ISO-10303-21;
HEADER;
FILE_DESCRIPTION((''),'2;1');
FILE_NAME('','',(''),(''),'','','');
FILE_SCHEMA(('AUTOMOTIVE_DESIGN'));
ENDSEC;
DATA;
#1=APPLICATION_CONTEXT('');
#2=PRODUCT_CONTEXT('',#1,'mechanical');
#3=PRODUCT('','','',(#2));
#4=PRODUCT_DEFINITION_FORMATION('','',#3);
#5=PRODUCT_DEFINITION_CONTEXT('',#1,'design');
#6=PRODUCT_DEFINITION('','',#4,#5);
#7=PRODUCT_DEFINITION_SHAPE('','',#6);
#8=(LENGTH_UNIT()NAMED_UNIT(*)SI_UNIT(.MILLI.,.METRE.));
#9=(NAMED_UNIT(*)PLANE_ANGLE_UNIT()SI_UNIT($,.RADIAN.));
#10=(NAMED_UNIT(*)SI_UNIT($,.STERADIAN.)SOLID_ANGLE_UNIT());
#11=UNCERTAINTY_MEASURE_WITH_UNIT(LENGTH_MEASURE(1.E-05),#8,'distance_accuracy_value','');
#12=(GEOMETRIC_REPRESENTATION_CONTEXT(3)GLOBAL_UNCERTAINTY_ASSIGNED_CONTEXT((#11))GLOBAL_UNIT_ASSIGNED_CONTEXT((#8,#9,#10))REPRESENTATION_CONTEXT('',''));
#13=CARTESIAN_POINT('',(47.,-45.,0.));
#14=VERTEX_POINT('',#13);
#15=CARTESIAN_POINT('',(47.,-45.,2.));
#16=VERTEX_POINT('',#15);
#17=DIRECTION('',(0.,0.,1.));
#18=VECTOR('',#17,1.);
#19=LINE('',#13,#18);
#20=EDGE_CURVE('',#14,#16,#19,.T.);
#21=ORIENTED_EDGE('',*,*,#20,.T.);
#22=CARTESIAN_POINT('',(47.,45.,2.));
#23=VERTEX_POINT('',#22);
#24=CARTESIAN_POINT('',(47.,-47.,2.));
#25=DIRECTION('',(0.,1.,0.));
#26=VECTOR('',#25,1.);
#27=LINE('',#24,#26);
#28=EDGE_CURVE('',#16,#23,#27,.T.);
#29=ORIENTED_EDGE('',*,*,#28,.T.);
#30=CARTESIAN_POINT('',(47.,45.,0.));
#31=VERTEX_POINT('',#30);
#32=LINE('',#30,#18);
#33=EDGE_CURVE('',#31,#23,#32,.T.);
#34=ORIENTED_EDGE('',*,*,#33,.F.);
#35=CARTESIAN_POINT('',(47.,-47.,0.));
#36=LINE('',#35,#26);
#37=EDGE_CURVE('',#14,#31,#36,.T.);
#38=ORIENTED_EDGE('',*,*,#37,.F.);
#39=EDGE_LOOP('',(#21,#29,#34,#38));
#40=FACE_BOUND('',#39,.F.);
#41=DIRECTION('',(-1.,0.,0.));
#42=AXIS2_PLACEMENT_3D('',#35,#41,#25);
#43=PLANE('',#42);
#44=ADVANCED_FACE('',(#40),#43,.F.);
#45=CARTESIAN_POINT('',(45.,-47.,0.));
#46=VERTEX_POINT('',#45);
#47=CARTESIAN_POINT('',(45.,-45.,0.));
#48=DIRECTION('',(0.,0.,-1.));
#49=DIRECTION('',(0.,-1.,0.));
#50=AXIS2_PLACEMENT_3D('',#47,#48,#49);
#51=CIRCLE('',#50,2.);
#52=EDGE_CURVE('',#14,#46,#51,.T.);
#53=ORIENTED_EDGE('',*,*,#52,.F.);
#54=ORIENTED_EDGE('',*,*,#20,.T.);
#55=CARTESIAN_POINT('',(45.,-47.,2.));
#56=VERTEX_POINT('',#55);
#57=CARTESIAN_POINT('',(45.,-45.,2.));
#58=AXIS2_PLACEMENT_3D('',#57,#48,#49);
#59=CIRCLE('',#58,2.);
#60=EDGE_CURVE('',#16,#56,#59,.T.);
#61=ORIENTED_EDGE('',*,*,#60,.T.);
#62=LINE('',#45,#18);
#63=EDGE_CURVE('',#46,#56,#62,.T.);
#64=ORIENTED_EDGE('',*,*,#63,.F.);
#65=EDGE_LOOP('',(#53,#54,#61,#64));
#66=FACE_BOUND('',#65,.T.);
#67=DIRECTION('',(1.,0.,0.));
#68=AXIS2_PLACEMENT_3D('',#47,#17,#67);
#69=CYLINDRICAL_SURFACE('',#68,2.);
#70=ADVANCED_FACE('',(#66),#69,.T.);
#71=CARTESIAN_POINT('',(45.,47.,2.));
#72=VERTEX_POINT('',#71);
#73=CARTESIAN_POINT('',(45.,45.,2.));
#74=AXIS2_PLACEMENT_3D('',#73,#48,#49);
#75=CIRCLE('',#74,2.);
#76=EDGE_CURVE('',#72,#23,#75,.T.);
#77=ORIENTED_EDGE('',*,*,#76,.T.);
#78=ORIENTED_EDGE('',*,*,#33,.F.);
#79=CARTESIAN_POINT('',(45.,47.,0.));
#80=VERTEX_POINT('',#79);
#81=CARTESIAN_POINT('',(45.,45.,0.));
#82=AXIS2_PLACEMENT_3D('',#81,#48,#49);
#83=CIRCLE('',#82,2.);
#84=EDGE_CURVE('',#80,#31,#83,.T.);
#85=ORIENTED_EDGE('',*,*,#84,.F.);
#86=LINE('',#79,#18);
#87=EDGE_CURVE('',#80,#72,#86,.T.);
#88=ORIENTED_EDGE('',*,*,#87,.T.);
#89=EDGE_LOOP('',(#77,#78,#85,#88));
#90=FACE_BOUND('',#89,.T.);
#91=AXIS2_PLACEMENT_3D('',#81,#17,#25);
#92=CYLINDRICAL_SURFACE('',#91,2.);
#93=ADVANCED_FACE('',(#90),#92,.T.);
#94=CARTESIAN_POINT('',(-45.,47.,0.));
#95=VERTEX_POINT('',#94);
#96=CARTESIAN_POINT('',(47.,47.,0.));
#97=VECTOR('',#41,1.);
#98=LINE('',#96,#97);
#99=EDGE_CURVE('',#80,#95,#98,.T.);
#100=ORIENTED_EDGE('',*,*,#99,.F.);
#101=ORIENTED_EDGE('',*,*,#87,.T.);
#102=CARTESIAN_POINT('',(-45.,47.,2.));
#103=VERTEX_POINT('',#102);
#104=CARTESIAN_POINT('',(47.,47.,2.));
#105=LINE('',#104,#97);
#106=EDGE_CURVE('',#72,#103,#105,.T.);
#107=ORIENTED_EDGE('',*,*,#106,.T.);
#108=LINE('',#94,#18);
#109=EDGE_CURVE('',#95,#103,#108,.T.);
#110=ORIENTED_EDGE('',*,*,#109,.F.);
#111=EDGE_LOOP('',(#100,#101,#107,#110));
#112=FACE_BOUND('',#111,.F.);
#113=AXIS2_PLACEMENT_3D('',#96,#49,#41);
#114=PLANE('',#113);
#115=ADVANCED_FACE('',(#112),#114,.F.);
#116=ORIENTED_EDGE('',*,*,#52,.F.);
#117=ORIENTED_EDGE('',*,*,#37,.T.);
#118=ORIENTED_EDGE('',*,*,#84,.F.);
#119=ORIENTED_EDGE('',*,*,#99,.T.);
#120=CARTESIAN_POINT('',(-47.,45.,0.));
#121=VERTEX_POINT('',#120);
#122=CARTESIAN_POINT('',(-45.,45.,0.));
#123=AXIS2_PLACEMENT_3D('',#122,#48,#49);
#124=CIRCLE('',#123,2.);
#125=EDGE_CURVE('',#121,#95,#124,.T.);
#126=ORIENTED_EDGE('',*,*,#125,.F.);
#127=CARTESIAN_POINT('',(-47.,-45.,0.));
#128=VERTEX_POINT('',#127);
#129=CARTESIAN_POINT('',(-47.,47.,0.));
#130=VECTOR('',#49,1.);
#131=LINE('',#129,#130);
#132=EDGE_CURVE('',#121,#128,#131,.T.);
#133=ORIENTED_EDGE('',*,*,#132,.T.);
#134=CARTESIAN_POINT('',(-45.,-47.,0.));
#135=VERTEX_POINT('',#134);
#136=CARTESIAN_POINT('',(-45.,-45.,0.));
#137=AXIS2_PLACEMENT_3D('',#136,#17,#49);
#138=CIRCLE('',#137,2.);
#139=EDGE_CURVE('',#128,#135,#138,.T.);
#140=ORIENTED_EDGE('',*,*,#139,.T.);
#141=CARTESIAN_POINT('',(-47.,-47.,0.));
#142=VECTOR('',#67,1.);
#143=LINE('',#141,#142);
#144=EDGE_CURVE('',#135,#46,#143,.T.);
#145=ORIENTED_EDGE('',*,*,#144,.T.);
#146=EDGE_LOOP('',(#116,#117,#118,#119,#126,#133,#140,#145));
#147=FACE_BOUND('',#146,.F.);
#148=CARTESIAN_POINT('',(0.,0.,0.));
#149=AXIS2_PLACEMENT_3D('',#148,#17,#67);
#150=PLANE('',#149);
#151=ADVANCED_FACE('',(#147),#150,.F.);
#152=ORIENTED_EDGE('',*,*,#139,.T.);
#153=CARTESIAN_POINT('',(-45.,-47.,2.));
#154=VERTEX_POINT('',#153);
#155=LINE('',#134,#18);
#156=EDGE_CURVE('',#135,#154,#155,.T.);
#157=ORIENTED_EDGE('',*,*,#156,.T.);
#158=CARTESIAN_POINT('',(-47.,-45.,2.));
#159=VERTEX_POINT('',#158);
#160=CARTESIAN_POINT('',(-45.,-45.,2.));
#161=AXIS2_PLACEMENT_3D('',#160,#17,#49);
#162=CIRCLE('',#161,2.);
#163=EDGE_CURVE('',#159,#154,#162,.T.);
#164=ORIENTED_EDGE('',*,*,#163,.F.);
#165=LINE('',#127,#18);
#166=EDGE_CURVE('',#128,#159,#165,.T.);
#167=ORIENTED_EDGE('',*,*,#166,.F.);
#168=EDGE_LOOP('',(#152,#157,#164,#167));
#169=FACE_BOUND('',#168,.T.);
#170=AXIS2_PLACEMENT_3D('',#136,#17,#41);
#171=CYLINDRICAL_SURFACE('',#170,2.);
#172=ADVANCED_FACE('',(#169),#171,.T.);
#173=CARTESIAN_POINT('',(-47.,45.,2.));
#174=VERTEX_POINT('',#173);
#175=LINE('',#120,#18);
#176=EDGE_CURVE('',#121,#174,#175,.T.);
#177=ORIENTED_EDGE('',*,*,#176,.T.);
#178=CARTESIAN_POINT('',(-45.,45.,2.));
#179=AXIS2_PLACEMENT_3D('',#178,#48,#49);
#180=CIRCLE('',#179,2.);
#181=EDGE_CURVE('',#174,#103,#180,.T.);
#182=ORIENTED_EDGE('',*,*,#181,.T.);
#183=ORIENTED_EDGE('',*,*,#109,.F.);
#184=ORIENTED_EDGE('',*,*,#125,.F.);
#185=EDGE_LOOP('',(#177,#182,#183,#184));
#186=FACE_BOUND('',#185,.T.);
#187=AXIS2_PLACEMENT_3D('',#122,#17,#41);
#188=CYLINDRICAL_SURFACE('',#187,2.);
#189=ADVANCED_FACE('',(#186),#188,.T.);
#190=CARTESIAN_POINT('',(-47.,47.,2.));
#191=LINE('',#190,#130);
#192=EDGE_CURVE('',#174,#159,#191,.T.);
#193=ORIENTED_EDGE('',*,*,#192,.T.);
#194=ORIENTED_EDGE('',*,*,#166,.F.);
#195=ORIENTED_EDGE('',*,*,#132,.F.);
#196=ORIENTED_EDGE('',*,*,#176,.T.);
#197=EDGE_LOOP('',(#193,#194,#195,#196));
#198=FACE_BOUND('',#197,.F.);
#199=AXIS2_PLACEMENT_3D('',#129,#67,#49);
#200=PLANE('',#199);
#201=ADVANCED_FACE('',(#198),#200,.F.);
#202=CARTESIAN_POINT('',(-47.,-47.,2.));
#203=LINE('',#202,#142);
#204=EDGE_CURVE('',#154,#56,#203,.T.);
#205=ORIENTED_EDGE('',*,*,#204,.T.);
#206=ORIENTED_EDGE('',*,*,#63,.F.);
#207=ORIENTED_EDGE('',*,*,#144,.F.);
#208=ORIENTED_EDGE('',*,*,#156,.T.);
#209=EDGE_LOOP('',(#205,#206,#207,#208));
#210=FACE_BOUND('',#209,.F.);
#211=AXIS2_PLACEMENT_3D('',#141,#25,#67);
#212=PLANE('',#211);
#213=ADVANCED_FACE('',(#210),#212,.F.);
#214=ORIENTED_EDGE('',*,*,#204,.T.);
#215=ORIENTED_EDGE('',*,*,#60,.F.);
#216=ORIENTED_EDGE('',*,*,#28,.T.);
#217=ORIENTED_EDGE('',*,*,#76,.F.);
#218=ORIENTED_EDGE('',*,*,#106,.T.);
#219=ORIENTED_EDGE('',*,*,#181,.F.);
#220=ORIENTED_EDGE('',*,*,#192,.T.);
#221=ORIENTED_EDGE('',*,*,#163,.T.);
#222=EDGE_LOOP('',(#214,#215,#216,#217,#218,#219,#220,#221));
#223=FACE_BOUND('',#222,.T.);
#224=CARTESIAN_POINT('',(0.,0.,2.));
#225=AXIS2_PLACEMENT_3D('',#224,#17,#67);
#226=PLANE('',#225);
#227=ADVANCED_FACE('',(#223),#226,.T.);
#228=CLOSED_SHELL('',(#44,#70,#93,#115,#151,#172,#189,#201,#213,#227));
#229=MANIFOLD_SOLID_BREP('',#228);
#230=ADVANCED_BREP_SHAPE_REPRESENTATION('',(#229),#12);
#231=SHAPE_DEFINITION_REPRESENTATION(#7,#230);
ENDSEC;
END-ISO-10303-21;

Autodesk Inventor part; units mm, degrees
ref_plane "YZ Plane" through (0, 0, 0) normal (1, 0, 0) x (0, 1, 0)
ref_plane "XZ Plane" through (0, 0, 0) normal (0, 1, 0) x (-1, 0, 0)
ref_plane "XY Plane" through (0, 0, 0) normal (0, 0, 1) x (1, 0, 0)
sketch "Sketch1" plane through (0, 0, 0) normal (0, 0, 1) x (1, 0, 0)
  line L0 (-47, -47) -> (47, -47)
  line L1 (47, -47) -> (47, 47)
  line L2 (47, 47) -> (-47, 47)
  line L3 (-47, 47) -> (-47, -47)
  line L4 (-47, -47) -> (47, 47) construction
  line L5 (47, -47) -> (-47, 47) construction
  point P0 (0, 0)
  dimension "d154" = 94
  dimension "d155" = 94
extrude "Plate5" add sketch "Sketch1" along normal blind 2
fillet "Corner Round1" radius 2 4 edges at (47, 47, 1) (-47, 47, 1) (-47, -47, 1) (47, -47, 1)
properties part number "TZS 1665 FDS 940 CUP 1" material "Stainless Steel"
